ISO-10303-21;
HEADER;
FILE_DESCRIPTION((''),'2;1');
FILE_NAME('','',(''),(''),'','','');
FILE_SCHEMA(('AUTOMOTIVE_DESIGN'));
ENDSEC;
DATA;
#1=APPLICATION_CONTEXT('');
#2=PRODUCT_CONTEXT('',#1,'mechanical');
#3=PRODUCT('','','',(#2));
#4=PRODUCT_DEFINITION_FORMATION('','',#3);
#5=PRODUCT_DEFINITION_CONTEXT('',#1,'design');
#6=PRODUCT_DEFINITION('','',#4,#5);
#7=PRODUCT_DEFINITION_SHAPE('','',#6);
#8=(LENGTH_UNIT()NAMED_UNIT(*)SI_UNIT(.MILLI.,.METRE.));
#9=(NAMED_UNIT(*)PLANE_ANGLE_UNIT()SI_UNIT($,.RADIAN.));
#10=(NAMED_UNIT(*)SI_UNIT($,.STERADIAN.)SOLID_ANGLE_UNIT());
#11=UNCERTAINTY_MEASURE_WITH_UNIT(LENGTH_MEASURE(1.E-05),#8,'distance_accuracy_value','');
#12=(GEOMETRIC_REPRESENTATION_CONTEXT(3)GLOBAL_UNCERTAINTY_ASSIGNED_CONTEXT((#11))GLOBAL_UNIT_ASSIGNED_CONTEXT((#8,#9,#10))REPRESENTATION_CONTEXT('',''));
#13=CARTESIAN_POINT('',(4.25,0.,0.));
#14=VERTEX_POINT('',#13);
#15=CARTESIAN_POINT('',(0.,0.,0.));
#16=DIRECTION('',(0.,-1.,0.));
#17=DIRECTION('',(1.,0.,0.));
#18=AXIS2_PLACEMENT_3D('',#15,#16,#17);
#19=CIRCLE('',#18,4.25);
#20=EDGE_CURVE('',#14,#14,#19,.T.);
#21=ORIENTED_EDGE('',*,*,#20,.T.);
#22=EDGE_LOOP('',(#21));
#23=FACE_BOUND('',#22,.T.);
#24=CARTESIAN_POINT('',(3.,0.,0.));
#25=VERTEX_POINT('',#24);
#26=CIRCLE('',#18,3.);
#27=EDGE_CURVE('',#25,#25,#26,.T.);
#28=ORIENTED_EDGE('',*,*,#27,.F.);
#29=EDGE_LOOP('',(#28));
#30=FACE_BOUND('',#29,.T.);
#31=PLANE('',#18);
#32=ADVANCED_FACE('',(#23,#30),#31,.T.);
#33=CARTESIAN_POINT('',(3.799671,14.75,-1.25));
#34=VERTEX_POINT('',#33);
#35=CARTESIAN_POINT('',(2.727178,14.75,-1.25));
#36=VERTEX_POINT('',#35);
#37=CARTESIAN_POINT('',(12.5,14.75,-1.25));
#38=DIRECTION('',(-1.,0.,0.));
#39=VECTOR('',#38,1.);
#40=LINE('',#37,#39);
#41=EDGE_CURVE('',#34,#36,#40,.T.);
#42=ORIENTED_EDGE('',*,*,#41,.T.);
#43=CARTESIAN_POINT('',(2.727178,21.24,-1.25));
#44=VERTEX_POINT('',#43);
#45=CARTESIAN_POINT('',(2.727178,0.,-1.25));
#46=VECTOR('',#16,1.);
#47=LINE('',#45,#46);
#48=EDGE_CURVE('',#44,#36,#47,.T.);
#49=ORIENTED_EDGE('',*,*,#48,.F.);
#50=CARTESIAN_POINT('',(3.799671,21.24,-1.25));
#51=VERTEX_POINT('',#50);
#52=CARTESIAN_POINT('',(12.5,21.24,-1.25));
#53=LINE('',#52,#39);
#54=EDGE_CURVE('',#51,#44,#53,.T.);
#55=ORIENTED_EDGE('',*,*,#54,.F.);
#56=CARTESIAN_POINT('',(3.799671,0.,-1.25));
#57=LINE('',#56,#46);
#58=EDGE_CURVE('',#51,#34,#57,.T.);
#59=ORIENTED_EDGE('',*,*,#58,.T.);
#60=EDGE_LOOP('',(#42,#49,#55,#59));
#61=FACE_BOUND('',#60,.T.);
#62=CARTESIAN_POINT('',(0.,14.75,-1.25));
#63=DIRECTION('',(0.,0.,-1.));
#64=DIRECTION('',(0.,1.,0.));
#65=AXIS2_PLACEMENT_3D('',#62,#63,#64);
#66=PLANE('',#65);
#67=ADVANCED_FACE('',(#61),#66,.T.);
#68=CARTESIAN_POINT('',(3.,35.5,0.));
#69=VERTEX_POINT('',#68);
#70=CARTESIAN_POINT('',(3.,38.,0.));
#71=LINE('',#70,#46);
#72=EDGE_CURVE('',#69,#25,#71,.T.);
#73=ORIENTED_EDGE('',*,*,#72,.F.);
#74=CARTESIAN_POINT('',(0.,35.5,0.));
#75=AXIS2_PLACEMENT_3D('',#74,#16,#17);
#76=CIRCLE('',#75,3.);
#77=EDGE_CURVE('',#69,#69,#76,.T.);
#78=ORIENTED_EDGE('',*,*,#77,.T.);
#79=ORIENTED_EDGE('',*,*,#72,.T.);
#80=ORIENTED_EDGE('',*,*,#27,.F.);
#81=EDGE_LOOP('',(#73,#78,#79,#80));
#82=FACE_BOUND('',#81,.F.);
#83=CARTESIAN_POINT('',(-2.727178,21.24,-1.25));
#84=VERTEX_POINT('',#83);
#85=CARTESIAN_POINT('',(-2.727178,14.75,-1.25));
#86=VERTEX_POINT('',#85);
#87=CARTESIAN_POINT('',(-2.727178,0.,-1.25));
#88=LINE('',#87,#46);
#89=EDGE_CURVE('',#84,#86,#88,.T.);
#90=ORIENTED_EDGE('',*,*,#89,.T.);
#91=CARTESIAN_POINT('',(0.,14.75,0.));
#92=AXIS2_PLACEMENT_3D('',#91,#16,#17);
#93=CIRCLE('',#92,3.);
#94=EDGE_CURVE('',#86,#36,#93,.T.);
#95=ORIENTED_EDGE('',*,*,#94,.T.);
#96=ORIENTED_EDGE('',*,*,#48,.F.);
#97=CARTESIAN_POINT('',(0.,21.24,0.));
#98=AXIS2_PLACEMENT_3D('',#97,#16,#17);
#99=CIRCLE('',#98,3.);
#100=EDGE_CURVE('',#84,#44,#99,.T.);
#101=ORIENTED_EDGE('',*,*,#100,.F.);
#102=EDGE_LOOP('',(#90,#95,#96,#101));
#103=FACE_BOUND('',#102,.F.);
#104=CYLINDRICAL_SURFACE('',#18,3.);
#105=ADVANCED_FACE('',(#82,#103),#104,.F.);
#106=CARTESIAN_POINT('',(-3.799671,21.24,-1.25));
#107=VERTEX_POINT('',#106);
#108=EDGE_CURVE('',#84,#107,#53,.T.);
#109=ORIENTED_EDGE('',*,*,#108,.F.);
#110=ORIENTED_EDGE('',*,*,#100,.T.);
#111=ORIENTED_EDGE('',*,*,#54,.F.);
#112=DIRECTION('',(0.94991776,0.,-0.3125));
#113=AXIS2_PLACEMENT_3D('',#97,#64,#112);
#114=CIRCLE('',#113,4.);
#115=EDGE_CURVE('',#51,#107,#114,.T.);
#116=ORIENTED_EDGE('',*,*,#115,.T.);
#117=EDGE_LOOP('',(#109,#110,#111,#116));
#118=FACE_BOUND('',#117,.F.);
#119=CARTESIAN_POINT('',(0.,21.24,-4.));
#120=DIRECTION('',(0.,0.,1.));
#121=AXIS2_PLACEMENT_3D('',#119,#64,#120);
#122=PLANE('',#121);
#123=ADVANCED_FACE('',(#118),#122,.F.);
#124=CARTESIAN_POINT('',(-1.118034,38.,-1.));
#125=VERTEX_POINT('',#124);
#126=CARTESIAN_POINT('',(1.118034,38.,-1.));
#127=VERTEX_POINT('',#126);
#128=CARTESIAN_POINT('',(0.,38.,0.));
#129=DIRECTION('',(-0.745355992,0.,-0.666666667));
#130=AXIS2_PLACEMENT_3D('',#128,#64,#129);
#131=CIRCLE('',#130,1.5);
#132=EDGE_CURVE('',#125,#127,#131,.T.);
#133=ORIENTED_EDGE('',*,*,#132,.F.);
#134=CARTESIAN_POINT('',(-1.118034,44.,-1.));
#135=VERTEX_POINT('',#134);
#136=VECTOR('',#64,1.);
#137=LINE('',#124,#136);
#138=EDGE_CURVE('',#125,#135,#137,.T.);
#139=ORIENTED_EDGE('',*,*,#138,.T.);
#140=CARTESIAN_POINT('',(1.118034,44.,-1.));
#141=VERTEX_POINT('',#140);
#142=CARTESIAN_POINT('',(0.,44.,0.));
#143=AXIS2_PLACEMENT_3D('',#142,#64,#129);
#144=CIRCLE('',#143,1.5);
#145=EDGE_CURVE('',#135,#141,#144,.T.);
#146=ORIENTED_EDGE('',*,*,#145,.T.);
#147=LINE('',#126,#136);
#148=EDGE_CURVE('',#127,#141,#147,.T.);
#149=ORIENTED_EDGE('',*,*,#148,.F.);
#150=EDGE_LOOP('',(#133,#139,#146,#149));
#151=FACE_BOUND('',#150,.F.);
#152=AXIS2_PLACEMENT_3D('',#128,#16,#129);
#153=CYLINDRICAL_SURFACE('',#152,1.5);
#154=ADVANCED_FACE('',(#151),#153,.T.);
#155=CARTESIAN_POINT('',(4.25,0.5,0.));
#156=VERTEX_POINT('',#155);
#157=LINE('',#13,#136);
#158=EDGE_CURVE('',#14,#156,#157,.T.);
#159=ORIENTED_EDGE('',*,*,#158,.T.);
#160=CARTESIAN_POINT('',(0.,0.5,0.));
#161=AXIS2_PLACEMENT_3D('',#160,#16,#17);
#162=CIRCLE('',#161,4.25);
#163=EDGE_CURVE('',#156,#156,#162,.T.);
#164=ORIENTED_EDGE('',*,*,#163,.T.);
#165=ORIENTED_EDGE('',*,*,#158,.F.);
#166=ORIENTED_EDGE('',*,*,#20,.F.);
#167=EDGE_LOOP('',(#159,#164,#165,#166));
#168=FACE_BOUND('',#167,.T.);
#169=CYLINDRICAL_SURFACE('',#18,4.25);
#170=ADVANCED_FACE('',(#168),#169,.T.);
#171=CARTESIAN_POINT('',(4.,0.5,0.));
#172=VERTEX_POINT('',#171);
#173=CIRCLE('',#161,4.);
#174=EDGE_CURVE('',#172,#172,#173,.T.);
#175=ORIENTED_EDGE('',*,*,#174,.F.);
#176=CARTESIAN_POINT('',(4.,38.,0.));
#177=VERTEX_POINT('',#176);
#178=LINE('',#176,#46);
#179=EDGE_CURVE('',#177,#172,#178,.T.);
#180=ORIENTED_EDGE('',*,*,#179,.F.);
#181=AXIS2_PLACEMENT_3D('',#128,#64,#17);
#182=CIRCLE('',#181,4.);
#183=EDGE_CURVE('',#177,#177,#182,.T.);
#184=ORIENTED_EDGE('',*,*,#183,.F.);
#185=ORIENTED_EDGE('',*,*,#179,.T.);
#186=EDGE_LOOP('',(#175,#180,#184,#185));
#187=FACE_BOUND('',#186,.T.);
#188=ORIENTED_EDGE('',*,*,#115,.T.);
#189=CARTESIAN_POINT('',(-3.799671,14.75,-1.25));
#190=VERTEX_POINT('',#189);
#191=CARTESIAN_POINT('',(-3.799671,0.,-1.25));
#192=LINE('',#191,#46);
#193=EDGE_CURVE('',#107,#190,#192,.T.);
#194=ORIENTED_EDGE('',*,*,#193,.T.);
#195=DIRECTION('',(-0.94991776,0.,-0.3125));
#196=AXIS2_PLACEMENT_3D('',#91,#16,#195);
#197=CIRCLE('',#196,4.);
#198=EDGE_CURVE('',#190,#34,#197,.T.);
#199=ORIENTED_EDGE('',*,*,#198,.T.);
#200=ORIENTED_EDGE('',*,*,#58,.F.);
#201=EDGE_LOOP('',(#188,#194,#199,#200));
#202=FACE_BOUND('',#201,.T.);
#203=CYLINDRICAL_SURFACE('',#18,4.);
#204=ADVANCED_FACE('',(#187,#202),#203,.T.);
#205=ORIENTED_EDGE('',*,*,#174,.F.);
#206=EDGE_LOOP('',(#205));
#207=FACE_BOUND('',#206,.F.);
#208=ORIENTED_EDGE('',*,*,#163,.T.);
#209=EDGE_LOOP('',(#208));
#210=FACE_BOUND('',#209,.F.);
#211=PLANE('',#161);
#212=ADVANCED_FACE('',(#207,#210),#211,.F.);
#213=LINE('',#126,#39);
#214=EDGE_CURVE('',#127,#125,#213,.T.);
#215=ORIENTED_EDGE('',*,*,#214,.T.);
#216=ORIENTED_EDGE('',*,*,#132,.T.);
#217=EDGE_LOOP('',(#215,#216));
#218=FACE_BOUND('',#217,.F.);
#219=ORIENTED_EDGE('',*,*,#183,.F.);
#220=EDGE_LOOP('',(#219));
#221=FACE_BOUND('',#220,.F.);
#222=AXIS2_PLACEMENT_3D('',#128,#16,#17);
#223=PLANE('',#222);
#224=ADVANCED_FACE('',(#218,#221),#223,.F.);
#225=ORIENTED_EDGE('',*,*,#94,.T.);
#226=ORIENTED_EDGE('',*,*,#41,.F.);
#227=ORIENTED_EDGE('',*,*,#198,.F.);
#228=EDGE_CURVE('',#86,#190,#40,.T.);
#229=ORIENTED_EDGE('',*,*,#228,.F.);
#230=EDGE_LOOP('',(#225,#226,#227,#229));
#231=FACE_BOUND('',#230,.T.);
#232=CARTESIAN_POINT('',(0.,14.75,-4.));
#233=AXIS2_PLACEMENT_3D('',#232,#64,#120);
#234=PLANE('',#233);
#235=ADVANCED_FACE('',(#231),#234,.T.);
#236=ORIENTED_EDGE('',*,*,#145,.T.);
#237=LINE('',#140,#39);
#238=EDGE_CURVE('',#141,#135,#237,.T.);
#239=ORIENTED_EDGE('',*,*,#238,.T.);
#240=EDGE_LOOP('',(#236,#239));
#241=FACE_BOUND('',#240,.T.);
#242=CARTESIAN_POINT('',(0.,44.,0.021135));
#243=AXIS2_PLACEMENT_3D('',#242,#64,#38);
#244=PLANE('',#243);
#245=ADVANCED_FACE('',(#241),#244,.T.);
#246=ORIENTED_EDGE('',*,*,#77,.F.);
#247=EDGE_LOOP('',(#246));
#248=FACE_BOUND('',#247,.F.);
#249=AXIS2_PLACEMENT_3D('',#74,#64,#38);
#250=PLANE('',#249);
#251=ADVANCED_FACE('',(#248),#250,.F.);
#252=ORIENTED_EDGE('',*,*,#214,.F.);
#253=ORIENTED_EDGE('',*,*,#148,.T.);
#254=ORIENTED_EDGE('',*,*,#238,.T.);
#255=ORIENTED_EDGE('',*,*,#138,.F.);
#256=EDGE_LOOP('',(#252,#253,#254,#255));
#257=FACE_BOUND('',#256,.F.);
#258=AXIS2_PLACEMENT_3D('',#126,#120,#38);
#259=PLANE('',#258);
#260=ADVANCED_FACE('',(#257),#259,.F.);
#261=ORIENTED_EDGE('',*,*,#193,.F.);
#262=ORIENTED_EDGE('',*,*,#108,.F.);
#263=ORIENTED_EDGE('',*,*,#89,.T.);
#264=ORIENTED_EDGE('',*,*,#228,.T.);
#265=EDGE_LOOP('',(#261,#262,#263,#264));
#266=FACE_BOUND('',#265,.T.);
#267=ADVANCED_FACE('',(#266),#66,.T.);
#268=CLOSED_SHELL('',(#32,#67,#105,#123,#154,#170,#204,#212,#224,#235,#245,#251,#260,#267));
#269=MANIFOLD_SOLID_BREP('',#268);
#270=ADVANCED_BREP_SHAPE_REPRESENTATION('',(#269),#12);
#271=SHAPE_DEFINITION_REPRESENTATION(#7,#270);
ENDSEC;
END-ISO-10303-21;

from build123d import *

# Parameters (mm, degrees)
F0_R     = 4
F0_R_2   = 3
F1_DEPTH = 38
F2_R     = 4.25
F2_R_2   = 4
F2_R_3   = 3
F3_DEPTH = 0.5
F4_W     = 6.49
F4_H     = 2.75
F5_DEPTH = 12.5
F6_R     = 4
F6_R_2   = 3
F7_DEPTH = 2.5
F9_DEPTH = 6


with BuildPart() as f1:
    # F0 (on Front) → F1 (new body)
    with BuildSketch(Plane.XZ):
        Circle(F0_R)
        Circle(F0_R_2, mode=Mode.SUBTRACT)
    extrude(amount=-F1_DEPTH)

    # F2 (on face) → F3 (join)
    with BuildSketch(Plane.XZ):
        Circle(F2_R)
        Circle(F2_R_2, mode=Mode.SUBTRACT)
        Circle(F2_R_2)
        Circle(F2_R_3, mode=Mode.SUBTRACT)
    extrude(amount=-F3_DEPTH)

    # F4 (on Right) → F5 (cut, symmetric)
    with BuildSketch(Plane.YZ):
        with Locations((17.995, -2.625)):
            Rectangle(F4_W, F4_H)
    extrude(amount=F5_DEPTH, both=True, mode=Mode.SUBTRACT)

    # F6 (on face) → F7 (join)
    with BuildSketch(Plane(origin=(0, 38, 0), x_dir=(-1, 0, 0), z_dir=(0, 1, 0))):
        Circle(F6_R)
        Circle(F6_R_2, mode=Mode.SUBTRACT)
        Circle(F6_R_2)
    extrude(amount=-F7_DEPTH)

    # F8 (on face) → F9 (join)
    with BuildSketch(Plane(origin=(0, 38, 0), x_dir=(-1, 0, 0), z_dir=(0, 1, 0))):
        with BuildLine():
            Line((-1.1180339887, -1), (1.1180339887, -1))
            ThreePointArc((1.1180339887, -1), (0, 1.5), (-1.1180339887, -1))
        make_face()
    extrude(amount=F9_DEPTH)


solid = f1.part
